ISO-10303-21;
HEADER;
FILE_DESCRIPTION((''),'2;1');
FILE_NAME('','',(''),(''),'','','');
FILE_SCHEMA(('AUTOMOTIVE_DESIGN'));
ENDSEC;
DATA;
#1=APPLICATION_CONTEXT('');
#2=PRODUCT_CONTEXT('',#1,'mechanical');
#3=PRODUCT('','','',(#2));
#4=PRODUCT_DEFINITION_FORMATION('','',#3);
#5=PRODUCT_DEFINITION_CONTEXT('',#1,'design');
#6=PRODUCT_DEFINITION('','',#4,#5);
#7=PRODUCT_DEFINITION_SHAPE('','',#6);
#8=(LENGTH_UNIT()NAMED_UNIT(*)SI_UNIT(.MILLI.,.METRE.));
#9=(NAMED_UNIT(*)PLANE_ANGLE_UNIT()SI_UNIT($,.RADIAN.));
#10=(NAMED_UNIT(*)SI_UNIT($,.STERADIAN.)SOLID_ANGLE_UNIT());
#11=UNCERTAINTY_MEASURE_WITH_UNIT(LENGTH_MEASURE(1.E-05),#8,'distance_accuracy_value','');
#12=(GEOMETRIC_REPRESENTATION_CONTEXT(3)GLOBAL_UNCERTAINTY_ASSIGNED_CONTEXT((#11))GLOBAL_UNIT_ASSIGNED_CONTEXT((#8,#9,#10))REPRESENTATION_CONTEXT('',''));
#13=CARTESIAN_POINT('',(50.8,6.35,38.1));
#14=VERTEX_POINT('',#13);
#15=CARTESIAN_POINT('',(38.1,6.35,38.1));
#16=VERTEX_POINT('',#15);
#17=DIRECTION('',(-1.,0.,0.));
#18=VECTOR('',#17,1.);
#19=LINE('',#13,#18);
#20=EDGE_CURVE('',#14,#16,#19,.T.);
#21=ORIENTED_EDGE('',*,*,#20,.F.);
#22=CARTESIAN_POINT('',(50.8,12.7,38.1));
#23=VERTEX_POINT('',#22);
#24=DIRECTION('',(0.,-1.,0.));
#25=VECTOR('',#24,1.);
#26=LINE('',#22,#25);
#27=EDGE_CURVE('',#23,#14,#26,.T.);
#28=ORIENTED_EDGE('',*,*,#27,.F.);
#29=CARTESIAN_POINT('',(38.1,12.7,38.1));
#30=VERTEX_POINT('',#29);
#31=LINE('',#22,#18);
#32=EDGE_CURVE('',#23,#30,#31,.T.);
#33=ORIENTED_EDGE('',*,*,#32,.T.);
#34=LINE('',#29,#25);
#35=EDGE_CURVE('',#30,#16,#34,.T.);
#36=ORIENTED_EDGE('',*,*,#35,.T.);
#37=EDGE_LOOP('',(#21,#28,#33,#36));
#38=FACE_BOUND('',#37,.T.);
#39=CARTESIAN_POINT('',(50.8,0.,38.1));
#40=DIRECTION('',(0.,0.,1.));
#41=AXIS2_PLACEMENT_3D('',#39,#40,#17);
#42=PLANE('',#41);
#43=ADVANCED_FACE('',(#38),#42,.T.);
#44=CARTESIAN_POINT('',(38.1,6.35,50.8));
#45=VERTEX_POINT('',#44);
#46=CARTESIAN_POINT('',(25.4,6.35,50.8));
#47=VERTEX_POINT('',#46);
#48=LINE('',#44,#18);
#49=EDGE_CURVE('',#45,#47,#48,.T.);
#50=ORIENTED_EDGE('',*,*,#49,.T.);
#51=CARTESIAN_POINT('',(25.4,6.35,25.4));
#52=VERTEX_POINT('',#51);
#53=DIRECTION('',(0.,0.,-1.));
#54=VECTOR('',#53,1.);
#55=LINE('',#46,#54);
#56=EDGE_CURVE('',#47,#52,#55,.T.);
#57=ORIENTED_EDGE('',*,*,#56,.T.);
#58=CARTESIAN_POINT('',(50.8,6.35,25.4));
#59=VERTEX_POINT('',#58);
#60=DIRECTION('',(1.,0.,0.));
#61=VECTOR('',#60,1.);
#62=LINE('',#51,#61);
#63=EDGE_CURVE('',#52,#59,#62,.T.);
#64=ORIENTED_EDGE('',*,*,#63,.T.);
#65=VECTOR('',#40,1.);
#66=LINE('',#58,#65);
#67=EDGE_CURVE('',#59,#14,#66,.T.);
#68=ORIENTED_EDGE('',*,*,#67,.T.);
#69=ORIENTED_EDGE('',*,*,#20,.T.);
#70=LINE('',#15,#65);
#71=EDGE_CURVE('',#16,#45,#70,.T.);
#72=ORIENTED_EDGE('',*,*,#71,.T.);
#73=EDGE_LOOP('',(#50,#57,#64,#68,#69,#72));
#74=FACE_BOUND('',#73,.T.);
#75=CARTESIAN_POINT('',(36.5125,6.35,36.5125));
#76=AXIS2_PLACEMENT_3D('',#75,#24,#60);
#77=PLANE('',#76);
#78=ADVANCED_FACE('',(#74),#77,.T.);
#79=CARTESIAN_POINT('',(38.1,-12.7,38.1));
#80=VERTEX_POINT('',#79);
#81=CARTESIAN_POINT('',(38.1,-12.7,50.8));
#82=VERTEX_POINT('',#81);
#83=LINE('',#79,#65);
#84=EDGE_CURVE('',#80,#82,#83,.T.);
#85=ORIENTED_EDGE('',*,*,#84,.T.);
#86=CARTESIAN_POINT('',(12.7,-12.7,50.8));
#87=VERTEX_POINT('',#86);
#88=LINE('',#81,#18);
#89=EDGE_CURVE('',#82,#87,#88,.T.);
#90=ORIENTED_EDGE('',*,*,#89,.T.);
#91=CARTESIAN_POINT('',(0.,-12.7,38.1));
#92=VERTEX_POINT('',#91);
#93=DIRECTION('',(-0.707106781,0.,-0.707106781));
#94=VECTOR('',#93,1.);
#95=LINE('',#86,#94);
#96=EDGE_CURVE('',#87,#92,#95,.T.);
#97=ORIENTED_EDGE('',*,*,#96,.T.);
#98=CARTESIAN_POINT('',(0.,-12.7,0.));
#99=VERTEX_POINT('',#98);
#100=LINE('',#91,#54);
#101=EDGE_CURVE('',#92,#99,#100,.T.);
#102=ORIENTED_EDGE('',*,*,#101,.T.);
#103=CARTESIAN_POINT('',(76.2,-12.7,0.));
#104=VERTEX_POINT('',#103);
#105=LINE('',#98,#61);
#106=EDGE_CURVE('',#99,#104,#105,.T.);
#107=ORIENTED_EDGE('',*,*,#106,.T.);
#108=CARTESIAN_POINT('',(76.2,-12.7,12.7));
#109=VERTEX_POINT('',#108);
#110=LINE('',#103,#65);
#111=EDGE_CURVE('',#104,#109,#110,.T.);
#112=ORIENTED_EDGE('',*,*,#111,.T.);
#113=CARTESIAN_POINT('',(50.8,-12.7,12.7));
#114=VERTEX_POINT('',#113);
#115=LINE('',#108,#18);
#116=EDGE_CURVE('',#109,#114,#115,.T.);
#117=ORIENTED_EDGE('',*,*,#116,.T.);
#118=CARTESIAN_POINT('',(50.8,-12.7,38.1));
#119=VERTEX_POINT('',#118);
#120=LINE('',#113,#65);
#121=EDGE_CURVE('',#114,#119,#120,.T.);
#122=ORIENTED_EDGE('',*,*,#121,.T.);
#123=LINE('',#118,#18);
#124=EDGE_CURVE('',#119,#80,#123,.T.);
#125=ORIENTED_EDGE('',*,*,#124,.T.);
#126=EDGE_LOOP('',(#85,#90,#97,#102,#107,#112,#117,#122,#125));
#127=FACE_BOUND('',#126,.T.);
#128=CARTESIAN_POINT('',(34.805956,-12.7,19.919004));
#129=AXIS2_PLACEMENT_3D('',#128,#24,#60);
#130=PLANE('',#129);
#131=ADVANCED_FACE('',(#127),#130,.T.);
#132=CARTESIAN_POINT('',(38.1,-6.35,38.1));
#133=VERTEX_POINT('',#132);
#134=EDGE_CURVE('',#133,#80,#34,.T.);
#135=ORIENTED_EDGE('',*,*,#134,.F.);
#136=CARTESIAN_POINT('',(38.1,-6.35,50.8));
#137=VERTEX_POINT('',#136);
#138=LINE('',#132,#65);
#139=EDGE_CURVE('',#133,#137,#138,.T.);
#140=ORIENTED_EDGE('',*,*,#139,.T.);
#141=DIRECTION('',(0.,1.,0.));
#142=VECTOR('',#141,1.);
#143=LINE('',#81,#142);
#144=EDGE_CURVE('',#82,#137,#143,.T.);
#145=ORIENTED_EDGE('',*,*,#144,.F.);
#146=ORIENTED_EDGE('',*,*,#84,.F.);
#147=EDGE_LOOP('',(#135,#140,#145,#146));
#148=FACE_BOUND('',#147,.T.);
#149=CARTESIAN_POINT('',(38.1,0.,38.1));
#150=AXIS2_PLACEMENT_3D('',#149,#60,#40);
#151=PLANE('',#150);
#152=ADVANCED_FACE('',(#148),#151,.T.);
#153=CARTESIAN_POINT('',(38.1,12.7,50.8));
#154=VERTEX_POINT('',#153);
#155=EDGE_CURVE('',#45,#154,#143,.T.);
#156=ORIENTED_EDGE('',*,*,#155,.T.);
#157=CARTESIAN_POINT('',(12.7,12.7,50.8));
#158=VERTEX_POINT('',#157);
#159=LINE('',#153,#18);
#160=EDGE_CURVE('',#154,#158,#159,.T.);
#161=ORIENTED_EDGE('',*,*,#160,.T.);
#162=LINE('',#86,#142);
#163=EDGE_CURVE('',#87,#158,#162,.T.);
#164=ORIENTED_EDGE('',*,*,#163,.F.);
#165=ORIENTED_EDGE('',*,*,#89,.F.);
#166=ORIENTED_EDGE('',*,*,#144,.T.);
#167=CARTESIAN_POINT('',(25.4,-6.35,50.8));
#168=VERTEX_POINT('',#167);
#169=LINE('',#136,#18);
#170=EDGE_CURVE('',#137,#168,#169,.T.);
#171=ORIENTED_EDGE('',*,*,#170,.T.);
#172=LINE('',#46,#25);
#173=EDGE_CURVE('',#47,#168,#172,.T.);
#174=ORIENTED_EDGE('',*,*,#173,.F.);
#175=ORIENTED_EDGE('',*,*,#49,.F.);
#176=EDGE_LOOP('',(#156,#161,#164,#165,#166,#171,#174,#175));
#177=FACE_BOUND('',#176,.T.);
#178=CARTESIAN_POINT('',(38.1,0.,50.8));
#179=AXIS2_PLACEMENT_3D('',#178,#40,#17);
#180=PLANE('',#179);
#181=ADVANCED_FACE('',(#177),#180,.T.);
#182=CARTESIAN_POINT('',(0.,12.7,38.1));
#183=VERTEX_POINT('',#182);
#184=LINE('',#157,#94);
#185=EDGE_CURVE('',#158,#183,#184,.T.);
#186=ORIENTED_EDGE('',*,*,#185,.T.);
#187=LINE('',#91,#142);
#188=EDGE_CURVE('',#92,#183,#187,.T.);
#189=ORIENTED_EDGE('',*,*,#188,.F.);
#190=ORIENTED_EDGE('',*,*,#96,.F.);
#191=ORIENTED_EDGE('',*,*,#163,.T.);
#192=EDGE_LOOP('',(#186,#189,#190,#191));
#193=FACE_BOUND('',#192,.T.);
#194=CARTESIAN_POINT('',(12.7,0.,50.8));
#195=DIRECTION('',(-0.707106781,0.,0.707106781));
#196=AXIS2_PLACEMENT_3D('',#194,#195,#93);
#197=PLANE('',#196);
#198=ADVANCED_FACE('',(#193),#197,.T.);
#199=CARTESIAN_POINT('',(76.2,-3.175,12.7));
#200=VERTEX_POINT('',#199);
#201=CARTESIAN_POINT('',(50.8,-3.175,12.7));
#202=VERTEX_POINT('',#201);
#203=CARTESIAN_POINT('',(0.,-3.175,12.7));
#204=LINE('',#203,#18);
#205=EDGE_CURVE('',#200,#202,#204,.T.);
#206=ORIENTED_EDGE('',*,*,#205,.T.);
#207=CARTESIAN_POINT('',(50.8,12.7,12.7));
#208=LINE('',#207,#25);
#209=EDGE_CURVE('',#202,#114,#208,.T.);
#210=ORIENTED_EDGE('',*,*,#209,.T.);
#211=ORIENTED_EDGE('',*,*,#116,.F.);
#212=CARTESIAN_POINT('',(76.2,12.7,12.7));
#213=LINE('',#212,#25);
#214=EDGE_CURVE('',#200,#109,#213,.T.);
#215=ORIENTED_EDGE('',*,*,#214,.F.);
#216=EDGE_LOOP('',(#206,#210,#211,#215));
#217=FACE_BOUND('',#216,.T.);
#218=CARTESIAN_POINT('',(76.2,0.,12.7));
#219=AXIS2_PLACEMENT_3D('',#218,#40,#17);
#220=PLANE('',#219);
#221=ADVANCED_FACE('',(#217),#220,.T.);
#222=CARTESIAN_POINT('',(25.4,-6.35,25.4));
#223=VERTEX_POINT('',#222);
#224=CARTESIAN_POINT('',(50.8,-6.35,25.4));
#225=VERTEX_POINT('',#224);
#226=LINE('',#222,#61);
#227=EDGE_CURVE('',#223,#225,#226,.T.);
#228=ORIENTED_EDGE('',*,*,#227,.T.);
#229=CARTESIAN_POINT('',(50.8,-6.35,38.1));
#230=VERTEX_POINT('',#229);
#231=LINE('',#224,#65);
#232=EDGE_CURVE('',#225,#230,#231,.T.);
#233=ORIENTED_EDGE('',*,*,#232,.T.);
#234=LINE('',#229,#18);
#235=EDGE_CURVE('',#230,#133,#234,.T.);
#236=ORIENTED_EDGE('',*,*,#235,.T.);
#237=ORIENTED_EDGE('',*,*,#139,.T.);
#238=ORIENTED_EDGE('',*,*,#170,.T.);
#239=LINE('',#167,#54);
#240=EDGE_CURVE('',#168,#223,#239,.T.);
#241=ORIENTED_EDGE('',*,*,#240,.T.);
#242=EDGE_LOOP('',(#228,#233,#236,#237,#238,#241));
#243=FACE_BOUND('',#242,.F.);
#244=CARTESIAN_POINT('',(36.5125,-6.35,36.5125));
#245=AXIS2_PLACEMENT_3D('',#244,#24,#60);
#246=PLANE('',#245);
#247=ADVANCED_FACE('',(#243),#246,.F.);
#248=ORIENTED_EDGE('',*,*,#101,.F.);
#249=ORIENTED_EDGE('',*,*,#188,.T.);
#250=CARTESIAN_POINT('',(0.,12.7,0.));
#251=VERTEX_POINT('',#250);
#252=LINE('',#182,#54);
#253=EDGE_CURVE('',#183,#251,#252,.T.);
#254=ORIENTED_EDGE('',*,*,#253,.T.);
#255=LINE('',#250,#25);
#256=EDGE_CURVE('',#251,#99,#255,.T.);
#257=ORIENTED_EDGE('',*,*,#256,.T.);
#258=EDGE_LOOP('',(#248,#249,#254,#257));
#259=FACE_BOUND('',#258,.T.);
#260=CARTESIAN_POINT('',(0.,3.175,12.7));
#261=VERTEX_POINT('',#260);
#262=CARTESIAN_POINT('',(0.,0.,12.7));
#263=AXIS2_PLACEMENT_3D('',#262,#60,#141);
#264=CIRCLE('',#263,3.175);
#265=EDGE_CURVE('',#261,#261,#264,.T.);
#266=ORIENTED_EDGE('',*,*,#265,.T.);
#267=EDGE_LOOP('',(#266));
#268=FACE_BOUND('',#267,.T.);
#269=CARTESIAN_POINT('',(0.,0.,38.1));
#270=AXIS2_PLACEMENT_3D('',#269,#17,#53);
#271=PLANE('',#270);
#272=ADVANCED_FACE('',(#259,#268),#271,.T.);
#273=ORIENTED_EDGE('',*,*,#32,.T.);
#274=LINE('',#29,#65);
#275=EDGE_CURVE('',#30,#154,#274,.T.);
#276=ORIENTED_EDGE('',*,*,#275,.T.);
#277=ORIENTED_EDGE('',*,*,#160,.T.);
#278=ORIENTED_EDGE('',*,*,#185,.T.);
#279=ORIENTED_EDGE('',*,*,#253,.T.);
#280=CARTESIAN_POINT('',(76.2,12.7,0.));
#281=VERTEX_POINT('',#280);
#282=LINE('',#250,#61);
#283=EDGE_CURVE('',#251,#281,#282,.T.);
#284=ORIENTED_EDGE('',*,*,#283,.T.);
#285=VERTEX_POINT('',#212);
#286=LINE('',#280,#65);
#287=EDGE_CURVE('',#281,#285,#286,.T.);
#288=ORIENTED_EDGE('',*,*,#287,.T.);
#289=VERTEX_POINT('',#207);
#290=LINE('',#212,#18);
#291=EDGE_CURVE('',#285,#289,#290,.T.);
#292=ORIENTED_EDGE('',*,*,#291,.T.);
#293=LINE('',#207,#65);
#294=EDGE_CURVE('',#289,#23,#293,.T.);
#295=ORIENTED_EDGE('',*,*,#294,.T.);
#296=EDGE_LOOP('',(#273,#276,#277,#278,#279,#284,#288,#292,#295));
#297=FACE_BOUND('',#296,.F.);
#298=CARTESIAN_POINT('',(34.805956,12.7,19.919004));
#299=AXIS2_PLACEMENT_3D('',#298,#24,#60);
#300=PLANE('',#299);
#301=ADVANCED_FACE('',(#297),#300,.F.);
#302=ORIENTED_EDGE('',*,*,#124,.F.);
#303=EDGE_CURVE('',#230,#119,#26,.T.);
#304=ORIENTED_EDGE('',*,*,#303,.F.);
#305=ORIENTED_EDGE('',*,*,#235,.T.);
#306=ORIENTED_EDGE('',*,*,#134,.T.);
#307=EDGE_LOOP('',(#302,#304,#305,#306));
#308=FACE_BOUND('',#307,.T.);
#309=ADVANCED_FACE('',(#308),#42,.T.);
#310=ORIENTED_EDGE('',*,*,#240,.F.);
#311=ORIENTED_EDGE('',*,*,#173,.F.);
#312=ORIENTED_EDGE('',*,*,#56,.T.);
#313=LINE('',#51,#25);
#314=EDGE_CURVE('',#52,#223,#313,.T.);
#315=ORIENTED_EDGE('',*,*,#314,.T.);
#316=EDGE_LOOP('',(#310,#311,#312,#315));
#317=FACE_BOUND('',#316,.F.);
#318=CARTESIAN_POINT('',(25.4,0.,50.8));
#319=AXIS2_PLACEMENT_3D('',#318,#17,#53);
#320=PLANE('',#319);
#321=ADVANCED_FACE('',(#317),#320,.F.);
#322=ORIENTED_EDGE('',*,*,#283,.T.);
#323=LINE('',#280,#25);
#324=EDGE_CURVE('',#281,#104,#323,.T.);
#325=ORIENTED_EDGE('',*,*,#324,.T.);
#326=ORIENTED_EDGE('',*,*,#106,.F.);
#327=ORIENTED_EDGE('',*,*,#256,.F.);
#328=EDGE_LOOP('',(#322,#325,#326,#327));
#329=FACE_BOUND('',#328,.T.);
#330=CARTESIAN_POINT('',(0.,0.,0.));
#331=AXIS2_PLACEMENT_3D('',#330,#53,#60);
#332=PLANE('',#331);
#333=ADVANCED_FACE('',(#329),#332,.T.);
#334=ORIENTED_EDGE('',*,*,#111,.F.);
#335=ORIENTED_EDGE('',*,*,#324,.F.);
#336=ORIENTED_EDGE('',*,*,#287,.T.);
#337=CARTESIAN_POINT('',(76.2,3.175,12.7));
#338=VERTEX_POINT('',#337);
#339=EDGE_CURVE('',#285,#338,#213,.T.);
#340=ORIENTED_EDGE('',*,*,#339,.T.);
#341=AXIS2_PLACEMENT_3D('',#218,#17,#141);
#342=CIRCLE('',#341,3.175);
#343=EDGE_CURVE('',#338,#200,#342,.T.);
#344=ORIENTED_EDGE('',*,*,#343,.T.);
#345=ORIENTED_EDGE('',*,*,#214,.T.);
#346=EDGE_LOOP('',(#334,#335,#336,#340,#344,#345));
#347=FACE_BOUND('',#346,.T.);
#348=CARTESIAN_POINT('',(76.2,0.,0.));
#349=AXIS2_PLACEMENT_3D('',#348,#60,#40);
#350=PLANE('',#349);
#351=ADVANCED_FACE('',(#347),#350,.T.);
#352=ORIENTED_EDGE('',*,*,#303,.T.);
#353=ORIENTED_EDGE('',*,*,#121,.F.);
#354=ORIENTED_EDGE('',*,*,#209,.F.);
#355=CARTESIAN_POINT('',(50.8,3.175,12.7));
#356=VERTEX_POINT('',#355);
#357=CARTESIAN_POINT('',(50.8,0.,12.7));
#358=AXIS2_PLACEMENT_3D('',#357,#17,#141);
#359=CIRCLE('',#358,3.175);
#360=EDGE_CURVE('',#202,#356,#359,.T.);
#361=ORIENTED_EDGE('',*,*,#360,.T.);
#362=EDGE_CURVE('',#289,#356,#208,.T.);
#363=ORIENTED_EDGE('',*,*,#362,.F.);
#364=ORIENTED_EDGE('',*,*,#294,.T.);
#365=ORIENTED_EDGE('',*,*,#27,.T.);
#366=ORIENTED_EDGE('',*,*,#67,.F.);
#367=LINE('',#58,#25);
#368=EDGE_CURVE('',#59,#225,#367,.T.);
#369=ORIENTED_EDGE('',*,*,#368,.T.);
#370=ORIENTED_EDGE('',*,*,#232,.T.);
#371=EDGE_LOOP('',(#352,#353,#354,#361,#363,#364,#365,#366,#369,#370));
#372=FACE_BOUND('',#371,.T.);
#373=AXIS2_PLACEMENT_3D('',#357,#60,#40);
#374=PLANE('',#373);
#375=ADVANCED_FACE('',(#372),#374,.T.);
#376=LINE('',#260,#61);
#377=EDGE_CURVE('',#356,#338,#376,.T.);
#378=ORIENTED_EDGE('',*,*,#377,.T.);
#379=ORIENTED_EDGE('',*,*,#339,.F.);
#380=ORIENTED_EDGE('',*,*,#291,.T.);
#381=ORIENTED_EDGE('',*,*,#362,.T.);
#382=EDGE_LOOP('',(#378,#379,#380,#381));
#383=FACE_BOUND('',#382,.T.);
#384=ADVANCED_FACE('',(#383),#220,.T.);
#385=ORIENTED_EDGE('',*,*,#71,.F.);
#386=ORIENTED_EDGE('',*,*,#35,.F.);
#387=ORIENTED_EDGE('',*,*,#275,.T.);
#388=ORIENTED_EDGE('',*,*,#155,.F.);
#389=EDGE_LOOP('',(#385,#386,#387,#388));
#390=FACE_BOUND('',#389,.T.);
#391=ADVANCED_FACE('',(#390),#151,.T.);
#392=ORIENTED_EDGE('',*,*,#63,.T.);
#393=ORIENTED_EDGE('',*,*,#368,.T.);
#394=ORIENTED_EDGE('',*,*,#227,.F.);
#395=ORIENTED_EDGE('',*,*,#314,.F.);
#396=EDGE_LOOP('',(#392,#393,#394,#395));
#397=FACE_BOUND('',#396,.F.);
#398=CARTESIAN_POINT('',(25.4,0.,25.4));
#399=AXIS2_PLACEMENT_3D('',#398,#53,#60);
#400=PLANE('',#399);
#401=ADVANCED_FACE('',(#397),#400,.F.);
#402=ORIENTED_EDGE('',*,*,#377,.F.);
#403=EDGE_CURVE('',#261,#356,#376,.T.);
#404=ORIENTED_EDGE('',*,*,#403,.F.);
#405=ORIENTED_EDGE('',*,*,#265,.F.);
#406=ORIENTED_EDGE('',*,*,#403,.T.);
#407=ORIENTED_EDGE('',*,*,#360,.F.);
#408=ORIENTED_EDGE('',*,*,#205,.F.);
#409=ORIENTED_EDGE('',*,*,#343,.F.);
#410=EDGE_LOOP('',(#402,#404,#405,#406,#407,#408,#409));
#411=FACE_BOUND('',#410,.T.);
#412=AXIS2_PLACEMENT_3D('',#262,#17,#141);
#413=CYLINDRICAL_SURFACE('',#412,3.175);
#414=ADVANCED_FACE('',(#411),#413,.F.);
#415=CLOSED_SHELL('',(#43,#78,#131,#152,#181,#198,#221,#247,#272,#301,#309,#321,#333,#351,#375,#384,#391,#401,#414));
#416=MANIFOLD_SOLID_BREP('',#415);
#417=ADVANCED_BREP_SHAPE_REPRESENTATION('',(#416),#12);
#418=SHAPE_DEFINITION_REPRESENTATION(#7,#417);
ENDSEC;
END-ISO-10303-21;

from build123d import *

# Parameters (mm, degrees)
F1_DEPTH = 12.7
F4_DEPTH = 6.35
F5_R     = 3.175
F6_DEPTH = 76.201


# Not quite as in the source:
# - a feature of the source that left no trace in its solid (it failed there, or was rolled back) is left out


with BuildPart() as f1:
    # F0 (on Front) → F1 (new body, symmetric)
    with BuildSketch(Plane.XZ):
        Polygon((0, 38.1), (0, 0), (76.2, 0), (76.2, 12.7), (50.8, 12.7), (50.8, 38.1), (38.1, 38.1), (38.1, 50.8), (12.7, 50.8), align=None)
    extrude(amount=F1_DEPTH, both=True)

    # F2 (on Front) → F4 (cut, symmetric)
    with BuildSketch(Plane.XZ):
        Polygon((38.1, 50.8), (25.4, 50.8), (25.4, 25.4), (50.8, 25.4), (50.8, 38.1), (38.1, 38.1), align=None)
    extrude(amount=F4_DEPTH, both=True, mode=Mode.SUBTRACT)

    # F5 (on Right) → F6 (cut, through all)
    with BuildSketch(Plane.YZ):
        with Locations((0, 12.7)):
            Circle(F5_R)
    extrude(amount=F6_DEPTH, mode=Mode.SUBTRACT)


solid = f1.part
